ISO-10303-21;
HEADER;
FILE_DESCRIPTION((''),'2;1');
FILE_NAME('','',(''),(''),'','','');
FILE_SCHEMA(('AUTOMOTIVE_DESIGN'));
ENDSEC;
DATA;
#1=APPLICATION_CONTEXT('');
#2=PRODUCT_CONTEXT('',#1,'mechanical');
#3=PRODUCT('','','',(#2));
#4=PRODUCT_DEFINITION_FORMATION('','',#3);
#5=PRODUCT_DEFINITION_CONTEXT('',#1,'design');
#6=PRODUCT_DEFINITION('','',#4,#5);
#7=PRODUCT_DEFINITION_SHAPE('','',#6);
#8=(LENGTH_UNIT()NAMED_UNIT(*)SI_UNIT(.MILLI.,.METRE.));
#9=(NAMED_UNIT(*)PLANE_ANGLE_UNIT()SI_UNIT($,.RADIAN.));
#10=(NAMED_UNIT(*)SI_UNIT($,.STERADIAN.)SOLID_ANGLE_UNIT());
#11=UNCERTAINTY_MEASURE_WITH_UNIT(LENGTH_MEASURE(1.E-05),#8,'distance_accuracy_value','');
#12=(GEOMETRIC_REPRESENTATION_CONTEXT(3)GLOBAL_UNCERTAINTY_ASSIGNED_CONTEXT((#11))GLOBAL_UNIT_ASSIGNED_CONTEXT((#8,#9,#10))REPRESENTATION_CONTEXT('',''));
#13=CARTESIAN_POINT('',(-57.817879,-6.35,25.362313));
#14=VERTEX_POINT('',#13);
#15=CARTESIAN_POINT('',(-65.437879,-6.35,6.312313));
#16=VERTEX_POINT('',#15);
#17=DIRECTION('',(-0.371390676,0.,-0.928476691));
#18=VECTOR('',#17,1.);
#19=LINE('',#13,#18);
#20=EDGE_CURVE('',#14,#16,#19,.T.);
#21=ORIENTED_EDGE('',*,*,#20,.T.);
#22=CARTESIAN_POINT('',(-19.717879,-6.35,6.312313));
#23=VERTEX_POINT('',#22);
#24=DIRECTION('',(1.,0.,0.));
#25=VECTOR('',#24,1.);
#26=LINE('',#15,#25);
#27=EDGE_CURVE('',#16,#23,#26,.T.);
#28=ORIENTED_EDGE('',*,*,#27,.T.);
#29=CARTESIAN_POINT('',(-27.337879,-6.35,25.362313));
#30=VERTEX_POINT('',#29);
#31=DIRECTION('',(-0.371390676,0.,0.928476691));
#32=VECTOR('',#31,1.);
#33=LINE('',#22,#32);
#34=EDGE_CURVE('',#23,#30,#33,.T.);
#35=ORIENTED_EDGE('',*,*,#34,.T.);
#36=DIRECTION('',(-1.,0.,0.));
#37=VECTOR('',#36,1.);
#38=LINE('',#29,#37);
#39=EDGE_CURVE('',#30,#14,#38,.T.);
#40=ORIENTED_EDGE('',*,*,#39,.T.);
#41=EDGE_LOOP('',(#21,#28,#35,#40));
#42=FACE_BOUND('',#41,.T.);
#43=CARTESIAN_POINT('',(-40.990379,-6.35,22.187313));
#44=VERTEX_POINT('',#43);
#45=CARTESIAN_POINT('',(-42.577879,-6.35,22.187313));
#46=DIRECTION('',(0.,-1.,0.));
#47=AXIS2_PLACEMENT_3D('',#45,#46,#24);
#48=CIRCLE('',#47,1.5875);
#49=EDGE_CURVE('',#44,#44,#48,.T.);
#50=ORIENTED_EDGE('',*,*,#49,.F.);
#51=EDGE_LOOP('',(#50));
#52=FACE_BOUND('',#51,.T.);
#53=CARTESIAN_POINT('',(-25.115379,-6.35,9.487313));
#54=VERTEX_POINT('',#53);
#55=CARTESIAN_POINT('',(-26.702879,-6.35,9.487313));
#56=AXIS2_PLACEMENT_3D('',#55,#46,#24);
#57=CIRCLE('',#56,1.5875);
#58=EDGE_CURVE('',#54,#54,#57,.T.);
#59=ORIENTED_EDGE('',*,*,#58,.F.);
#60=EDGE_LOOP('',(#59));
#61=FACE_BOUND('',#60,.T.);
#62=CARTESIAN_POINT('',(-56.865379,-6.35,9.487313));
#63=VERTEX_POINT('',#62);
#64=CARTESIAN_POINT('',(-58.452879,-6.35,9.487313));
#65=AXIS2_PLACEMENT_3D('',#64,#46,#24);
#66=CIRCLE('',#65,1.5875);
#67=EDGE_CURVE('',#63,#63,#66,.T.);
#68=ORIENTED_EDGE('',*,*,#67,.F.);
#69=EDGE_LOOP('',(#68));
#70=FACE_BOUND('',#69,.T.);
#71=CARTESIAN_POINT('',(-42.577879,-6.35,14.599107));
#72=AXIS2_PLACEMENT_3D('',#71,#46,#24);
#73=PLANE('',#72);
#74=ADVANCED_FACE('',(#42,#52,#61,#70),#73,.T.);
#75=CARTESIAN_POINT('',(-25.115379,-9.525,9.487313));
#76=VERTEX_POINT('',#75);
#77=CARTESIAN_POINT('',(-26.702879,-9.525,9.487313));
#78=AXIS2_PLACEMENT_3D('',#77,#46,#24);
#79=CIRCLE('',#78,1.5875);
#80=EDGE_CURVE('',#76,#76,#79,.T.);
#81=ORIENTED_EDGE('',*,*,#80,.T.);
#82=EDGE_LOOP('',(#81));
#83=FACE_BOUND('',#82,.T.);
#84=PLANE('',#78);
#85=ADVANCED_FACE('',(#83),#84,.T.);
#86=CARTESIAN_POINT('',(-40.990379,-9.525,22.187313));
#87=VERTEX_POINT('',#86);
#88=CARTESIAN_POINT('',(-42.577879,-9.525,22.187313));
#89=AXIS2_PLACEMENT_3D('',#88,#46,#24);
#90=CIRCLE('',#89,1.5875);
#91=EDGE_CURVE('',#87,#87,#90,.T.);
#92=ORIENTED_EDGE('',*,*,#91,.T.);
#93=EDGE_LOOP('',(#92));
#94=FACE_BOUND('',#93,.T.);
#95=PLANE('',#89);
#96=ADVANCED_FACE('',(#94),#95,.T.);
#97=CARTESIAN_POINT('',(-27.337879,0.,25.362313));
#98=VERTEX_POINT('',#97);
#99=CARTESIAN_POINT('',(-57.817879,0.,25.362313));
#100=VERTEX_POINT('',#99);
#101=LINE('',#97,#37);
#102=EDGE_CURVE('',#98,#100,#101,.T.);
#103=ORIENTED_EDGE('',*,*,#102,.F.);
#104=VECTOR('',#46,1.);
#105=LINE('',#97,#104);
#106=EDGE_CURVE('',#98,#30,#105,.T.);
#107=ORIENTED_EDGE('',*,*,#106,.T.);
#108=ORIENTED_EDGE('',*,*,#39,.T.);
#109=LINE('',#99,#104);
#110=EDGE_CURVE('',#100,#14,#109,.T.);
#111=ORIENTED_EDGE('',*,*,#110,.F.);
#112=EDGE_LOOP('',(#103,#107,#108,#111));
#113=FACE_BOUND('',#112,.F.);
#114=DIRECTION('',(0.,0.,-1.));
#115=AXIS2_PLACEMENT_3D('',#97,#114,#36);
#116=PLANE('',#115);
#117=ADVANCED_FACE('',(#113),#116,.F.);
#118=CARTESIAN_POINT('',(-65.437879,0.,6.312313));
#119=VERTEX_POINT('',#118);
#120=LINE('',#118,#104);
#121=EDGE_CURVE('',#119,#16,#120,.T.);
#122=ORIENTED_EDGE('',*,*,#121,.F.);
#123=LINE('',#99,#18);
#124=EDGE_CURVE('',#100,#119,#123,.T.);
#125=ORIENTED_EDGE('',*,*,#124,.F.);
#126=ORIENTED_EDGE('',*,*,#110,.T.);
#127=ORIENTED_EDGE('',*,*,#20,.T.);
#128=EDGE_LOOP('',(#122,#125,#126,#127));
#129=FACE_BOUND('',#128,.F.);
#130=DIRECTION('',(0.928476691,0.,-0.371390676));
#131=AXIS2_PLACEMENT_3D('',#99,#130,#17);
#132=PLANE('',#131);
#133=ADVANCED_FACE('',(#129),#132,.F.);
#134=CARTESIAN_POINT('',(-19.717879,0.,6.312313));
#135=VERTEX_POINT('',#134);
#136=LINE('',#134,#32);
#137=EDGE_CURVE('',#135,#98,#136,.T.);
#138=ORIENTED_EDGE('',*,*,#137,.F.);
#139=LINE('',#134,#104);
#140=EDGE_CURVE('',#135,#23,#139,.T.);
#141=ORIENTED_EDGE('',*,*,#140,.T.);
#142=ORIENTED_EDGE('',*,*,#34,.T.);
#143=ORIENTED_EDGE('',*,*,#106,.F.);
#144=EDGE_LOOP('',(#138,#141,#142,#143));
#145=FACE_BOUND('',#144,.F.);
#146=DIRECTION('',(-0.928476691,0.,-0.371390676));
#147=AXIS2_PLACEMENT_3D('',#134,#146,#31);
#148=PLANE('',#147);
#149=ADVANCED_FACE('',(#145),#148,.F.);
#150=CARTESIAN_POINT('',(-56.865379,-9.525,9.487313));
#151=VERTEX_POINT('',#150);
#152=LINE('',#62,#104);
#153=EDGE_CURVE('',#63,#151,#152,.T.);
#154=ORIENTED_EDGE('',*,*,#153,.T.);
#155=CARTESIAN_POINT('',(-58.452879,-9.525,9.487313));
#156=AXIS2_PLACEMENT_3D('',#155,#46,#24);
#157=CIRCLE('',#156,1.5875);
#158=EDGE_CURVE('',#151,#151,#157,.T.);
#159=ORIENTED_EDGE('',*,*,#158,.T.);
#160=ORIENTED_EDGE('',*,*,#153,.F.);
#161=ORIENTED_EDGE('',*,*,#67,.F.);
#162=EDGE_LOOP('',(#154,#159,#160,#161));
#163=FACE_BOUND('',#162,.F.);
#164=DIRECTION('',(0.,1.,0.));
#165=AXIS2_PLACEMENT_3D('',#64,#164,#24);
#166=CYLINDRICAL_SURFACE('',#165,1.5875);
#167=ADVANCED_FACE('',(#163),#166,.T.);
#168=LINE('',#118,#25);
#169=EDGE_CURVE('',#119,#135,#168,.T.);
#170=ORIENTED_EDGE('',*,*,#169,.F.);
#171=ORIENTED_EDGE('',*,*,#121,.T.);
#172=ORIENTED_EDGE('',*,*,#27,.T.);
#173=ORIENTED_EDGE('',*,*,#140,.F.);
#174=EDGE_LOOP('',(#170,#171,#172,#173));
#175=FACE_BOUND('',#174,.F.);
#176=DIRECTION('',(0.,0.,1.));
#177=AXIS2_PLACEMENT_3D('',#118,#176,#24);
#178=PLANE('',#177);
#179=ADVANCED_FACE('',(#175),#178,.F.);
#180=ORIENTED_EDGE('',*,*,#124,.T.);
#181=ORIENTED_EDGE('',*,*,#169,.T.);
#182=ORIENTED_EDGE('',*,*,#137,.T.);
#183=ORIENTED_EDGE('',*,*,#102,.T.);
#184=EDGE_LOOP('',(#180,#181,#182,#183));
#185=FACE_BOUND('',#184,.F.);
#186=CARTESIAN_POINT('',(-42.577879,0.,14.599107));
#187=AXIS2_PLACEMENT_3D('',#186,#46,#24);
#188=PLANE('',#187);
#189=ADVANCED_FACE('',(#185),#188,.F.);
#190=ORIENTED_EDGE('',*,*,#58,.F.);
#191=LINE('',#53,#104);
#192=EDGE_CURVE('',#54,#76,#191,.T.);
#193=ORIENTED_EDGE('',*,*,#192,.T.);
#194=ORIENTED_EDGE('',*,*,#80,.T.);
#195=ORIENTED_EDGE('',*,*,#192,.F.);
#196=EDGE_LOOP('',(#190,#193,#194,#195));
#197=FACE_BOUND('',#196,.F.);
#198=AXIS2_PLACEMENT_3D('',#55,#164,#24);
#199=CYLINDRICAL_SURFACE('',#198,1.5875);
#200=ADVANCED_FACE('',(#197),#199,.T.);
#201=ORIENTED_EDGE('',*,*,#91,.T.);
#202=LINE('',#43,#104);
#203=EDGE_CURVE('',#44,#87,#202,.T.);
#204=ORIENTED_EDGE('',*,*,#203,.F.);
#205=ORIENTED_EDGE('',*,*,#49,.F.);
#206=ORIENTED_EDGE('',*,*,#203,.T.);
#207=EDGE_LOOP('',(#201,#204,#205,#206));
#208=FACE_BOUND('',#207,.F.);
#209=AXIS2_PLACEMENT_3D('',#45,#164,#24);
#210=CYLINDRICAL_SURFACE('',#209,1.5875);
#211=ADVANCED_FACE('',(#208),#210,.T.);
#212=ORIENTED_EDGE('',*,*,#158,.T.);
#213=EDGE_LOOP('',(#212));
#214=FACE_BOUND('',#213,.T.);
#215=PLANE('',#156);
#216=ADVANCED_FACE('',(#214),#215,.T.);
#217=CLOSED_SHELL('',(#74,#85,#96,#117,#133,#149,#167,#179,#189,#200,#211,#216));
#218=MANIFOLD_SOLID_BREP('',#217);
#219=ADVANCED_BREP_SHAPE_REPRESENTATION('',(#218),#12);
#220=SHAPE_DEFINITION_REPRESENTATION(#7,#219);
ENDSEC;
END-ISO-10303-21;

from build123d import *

# Parameters (mm, degrees)
F1_DEPTH = 6.35
F2_R     = 1.5875
F3_DEPTH = 3.175


# Not quite as in the source:
# - a feature of the source that left no trace in its solid (it failed there, or was rolled back) is left out


with BuildPart() as f1:
    # F0 (on Front) → F1 (new body)
    with BuildSketch(Plane.XZ):
        Polygon((-57.817878572, 25.3623127937), (-65.437878572, 6.3123127937), (-19.717878572, 6.3123127937), (-27.337878572, 25.3623127937), (-42.577878572, 25.3623127937), align=None)
    extrude(amount=F1_DEPTH)

    # F2 (on face) → F3 (join)
    with BuildSketch(Plane.XZ.offset(6.35)):
        with Locations((-58.452878572, 9.4873127937)):
            Circle(F2_R)
        with Locations((-26.702878572, 9.4873127937)):
            Circle(F2_R)
        with Locations((-42.577878572, 22.1873127937)):
            Circle(F2_R)
    extrude(amount=F3_DEPTH)


solid = f1.part
